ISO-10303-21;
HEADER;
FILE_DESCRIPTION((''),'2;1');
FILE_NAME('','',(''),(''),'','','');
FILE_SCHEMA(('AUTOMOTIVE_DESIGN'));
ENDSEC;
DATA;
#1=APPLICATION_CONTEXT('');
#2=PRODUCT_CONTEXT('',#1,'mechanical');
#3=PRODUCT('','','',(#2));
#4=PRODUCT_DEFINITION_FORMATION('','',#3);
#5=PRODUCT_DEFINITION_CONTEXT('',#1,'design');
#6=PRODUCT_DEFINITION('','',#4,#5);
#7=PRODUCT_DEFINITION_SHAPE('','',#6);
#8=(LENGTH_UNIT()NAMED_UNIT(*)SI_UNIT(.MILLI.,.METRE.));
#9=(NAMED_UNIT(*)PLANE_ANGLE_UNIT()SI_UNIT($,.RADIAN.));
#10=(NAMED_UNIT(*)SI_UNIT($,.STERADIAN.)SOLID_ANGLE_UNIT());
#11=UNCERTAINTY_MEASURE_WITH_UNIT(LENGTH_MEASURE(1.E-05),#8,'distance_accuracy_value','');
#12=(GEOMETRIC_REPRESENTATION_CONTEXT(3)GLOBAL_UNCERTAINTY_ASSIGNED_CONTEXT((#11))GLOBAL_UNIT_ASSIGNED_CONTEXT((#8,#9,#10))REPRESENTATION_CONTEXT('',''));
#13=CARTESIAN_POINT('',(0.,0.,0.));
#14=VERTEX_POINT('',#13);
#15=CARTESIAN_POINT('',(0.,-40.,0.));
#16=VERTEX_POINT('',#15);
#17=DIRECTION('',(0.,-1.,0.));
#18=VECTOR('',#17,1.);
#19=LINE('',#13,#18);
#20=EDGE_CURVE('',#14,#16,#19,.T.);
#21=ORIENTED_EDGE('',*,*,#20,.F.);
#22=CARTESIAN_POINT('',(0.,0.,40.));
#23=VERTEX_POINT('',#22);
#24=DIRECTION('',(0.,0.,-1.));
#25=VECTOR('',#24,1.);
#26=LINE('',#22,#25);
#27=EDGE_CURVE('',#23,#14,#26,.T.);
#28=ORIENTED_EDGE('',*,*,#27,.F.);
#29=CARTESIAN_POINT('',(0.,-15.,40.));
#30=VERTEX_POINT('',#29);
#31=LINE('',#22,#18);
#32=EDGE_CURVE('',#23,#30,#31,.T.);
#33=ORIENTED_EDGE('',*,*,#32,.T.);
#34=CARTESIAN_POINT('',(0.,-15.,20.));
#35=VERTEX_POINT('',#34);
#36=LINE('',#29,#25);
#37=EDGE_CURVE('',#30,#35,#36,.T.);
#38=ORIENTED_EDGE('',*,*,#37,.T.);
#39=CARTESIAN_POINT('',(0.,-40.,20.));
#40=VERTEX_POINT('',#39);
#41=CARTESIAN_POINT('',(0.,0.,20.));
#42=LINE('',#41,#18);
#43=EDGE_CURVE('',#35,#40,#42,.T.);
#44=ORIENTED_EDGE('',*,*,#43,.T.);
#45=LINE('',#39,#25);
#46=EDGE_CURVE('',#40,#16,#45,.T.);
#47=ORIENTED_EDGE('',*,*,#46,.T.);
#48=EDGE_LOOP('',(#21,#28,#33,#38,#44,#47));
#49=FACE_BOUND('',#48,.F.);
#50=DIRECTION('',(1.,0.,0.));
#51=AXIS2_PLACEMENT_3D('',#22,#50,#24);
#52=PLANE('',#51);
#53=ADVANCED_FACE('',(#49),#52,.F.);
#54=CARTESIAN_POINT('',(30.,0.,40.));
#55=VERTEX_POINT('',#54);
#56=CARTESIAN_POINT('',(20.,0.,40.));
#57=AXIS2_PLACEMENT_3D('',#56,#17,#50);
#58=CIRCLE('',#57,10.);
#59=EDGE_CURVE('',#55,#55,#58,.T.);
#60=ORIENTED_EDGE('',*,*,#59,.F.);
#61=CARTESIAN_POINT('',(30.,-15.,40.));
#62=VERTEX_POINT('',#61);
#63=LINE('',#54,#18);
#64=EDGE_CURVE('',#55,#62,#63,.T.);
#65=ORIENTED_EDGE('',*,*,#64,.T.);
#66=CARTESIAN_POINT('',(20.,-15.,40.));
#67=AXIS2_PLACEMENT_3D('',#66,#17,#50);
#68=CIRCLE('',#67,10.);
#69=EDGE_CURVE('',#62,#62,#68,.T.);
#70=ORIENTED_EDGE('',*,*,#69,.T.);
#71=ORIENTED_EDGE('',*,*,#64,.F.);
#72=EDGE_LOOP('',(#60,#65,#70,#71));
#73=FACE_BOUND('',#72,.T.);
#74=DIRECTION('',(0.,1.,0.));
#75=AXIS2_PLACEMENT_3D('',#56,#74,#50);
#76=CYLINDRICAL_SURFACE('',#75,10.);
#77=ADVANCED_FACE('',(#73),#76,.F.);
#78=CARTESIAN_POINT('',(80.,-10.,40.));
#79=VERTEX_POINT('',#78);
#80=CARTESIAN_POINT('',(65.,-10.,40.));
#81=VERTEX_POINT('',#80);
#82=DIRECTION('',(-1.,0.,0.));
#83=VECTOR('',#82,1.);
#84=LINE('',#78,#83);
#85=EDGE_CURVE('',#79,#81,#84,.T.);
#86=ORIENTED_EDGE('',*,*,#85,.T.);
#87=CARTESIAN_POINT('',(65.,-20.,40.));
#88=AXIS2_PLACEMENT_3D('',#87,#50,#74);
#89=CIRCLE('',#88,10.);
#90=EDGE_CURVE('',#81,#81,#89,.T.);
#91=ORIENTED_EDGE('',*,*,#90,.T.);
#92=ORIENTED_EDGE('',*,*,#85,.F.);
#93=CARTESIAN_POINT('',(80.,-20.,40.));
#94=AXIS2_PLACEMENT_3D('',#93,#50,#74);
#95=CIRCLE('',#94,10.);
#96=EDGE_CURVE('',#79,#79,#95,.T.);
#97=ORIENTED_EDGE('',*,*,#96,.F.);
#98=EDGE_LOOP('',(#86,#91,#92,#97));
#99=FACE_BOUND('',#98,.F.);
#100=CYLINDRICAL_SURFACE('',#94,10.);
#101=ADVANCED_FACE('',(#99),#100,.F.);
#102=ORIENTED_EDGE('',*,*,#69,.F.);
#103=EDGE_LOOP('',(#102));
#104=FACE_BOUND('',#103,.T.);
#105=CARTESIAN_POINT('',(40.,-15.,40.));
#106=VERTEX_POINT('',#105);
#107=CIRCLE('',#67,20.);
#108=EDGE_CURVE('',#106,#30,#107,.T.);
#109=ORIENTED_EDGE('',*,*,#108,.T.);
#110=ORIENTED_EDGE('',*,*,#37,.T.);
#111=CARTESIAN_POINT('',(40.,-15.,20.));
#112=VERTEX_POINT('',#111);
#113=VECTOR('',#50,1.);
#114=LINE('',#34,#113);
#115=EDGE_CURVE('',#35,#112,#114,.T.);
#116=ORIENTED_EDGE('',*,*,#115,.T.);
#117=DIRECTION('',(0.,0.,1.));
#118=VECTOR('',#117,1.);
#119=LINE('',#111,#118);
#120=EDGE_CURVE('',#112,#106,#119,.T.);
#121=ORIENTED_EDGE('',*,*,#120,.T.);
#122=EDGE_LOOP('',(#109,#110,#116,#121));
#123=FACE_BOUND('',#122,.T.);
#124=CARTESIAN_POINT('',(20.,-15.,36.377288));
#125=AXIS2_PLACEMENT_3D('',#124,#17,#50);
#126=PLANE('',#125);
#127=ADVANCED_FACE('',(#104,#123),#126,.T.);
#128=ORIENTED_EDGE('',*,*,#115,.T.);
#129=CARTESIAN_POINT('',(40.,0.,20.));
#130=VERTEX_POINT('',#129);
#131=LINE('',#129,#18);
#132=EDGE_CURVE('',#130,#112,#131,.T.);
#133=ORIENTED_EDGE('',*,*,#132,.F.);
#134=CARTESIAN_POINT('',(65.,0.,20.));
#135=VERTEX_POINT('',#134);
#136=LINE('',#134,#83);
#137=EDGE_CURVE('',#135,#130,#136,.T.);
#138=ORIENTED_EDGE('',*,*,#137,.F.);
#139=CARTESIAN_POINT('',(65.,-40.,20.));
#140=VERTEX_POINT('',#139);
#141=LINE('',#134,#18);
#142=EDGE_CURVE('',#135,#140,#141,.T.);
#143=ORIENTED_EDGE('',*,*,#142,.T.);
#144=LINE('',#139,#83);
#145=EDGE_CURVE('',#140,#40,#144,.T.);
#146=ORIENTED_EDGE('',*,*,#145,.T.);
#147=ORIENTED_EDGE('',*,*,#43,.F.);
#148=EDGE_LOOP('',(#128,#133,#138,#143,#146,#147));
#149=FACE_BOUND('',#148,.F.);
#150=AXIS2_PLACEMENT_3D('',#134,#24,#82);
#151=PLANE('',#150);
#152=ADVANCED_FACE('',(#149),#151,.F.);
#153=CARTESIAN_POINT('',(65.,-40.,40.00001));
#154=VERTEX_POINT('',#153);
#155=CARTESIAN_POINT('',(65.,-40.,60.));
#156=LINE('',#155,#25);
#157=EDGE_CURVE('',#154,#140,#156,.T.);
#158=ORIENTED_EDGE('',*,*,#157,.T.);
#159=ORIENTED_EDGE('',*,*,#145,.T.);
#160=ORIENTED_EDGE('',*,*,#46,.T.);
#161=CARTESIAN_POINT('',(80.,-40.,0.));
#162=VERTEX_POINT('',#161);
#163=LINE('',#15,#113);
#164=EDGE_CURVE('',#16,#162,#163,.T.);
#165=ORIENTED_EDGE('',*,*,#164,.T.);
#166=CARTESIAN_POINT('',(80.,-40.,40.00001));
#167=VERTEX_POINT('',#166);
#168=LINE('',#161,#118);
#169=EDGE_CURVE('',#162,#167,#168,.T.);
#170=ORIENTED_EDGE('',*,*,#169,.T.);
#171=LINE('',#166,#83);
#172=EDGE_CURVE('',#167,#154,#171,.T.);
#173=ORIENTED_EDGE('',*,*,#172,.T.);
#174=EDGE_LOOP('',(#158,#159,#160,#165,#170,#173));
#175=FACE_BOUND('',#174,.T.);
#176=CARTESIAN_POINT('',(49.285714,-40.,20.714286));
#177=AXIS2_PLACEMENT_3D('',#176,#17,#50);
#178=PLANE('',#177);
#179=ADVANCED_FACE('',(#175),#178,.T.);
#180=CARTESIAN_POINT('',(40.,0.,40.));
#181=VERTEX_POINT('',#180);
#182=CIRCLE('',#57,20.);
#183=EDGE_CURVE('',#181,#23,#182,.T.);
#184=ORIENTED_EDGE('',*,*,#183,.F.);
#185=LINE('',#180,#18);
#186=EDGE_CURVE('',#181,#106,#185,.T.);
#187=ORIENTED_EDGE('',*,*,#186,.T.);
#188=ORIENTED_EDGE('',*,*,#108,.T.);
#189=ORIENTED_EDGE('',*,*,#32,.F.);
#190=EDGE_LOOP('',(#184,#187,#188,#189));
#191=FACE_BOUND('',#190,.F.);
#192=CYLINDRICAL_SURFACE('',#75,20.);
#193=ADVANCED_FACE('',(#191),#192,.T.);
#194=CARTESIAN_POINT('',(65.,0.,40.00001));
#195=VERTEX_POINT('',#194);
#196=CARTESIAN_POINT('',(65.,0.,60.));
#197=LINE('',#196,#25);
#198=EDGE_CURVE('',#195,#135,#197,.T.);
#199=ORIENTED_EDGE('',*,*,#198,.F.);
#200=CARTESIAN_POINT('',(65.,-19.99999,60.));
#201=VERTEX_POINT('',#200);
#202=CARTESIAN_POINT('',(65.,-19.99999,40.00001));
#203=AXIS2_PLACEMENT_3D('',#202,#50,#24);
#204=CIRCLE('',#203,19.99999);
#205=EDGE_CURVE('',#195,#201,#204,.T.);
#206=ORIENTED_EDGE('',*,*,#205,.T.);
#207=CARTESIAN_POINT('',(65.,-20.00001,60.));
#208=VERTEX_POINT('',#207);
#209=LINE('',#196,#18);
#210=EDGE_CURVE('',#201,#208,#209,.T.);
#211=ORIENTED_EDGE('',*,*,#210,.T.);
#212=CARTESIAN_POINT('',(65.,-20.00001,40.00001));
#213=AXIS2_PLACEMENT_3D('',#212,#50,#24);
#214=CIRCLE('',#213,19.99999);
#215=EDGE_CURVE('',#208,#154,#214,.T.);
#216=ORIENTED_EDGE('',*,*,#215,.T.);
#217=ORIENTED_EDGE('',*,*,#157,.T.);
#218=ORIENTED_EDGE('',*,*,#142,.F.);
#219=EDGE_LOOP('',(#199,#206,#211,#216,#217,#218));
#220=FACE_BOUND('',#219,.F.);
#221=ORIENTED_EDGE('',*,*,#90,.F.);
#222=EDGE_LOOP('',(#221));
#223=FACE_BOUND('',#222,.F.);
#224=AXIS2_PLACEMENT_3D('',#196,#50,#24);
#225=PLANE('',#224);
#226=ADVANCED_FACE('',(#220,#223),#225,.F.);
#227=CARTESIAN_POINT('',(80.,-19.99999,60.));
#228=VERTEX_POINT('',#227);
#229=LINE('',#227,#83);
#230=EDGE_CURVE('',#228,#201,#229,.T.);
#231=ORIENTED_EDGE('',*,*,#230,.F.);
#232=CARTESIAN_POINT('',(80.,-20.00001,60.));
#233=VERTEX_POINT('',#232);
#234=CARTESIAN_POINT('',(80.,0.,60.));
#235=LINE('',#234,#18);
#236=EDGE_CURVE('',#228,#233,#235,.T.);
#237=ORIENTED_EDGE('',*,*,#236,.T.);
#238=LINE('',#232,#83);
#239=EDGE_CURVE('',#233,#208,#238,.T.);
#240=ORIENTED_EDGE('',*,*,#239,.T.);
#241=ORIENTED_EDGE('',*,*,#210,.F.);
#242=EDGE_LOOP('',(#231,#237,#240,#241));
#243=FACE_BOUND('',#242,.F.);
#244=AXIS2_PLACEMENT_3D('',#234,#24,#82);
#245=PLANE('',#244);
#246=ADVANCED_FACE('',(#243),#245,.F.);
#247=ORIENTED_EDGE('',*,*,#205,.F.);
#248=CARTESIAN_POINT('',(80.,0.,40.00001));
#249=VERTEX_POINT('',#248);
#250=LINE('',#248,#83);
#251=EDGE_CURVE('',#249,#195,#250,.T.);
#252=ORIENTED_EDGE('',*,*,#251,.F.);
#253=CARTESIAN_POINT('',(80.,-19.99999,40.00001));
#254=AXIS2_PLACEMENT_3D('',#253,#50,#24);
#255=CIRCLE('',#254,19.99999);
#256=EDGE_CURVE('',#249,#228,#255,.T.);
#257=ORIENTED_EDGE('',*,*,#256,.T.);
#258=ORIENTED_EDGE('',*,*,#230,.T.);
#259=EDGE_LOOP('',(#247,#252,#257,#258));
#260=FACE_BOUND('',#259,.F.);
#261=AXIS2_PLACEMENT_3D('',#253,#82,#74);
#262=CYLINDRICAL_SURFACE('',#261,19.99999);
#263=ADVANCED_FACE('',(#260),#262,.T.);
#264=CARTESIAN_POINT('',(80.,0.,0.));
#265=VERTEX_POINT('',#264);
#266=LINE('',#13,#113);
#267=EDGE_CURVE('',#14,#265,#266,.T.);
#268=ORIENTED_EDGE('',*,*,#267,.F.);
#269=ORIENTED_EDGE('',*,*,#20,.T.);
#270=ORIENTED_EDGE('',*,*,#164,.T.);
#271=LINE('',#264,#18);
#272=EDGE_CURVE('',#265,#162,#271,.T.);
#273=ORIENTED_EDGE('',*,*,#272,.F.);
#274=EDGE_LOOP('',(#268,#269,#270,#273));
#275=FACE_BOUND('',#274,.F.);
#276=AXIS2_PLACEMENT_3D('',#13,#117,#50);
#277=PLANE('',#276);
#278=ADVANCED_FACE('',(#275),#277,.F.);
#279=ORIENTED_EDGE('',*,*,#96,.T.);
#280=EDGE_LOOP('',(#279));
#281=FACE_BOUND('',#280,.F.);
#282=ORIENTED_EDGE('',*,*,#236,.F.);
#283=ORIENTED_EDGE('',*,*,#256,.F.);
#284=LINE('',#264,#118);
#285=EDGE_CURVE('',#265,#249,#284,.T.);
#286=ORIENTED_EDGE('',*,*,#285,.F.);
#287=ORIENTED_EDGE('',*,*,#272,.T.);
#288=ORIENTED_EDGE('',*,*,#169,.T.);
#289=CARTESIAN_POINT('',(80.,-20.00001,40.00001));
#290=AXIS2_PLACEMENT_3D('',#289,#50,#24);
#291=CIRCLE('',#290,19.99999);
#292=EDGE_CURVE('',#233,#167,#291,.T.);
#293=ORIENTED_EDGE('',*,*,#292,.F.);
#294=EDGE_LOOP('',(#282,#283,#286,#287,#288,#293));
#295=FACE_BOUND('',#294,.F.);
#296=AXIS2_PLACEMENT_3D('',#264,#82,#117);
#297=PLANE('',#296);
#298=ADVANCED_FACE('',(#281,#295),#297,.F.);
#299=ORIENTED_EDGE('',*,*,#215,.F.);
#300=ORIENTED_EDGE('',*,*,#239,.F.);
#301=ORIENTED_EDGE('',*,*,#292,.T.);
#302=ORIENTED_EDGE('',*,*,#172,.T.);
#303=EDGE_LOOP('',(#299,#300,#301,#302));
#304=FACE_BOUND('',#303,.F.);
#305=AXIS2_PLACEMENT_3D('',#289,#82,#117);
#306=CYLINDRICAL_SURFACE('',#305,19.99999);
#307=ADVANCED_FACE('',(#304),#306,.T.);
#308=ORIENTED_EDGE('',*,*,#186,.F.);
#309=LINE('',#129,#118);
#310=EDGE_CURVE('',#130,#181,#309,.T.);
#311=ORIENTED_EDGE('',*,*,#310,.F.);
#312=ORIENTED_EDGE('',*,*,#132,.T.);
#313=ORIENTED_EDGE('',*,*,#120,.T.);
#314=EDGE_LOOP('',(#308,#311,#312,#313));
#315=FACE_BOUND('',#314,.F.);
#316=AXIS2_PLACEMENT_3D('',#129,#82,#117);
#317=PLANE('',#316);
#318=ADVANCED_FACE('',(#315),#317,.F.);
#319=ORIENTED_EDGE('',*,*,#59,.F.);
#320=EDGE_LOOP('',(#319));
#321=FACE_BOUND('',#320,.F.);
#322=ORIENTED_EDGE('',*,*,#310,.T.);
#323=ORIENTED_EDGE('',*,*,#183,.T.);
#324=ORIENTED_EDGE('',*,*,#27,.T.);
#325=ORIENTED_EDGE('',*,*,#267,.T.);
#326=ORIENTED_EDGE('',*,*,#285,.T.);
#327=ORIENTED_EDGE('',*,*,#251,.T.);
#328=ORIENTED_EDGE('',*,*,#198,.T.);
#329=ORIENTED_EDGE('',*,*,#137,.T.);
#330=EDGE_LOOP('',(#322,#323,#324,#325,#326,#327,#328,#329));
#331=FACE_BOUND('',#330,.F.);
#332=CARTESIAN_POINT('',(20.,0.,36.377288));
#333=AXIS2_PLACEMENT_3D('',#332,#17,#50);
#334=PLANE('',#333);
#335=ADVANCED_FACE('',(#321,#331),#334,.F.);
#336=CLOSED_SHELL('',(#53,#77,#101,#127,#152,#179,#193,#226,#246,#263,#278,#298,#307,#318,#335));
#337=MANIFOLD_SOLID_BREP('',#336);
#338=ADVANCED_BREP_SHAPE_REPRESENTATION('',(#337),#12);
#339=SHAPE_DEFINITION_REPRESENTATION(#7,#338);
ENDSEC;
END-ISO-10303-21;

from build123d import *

# Parameters (mm, degrees)
F1_DEPTH = 40
F0_R     = 10
F2_DEPTH = 15
F4_R     = 19.99999
F5_R     = 10
F6_DEPTH = 15


# Not quite as in the source:
# - a fillet or chamfer is up to 0.001 mm smaller than in the source, because OpenCascade refuses the exact size


with BuildPart() as f1:
    # F0 (on Front) → F1 (new body)
    with BuildSketch(Plane.XZ):
        Polygon((0, 20), (0, 0), (80, 0), (80, 60), (65, 60), (65, 20), (40, 20), align=None)
    extrude(amount=F1_DEPTH)

    # F0 (on Front) → F2 (join)
    with BuildSketch(Plane.XZ):
        with BuildLine():
            Line((0, 40), (0, 20))
            Line((0, 20), (40, 20))
            Line((40, 20), (40, 40))
            ThreePointArc((40, 40), (20, 60), (0, 40))
        make_face()
        with Locations((20, 40)):
            Circle(F0_R, mode=Mode.SUBTRACT)
    extrude(amount=F2_DEPTH)

    # F4 (radius 20 in the source; OpenCascade refuses exactly that, so slightly less here)
    f4_edges = [f1.edges().sort_by_distance(p)[0] for p in [
        (72.5, -40, 60),
        (72.5, 0, 60),
    ]]
    fillet(f4_edges, radius=F4_R)

    # F5 (on face) → F6 (cut, through all)
    with BuildSketch(Plane.YZ.offset(80)):
        with Locations((-20, 40)):
            Circle(F5_R)
    extrude(amount=-F6_DEPTH, mode=Mode.SUBTRACT)


solid = f1.part
